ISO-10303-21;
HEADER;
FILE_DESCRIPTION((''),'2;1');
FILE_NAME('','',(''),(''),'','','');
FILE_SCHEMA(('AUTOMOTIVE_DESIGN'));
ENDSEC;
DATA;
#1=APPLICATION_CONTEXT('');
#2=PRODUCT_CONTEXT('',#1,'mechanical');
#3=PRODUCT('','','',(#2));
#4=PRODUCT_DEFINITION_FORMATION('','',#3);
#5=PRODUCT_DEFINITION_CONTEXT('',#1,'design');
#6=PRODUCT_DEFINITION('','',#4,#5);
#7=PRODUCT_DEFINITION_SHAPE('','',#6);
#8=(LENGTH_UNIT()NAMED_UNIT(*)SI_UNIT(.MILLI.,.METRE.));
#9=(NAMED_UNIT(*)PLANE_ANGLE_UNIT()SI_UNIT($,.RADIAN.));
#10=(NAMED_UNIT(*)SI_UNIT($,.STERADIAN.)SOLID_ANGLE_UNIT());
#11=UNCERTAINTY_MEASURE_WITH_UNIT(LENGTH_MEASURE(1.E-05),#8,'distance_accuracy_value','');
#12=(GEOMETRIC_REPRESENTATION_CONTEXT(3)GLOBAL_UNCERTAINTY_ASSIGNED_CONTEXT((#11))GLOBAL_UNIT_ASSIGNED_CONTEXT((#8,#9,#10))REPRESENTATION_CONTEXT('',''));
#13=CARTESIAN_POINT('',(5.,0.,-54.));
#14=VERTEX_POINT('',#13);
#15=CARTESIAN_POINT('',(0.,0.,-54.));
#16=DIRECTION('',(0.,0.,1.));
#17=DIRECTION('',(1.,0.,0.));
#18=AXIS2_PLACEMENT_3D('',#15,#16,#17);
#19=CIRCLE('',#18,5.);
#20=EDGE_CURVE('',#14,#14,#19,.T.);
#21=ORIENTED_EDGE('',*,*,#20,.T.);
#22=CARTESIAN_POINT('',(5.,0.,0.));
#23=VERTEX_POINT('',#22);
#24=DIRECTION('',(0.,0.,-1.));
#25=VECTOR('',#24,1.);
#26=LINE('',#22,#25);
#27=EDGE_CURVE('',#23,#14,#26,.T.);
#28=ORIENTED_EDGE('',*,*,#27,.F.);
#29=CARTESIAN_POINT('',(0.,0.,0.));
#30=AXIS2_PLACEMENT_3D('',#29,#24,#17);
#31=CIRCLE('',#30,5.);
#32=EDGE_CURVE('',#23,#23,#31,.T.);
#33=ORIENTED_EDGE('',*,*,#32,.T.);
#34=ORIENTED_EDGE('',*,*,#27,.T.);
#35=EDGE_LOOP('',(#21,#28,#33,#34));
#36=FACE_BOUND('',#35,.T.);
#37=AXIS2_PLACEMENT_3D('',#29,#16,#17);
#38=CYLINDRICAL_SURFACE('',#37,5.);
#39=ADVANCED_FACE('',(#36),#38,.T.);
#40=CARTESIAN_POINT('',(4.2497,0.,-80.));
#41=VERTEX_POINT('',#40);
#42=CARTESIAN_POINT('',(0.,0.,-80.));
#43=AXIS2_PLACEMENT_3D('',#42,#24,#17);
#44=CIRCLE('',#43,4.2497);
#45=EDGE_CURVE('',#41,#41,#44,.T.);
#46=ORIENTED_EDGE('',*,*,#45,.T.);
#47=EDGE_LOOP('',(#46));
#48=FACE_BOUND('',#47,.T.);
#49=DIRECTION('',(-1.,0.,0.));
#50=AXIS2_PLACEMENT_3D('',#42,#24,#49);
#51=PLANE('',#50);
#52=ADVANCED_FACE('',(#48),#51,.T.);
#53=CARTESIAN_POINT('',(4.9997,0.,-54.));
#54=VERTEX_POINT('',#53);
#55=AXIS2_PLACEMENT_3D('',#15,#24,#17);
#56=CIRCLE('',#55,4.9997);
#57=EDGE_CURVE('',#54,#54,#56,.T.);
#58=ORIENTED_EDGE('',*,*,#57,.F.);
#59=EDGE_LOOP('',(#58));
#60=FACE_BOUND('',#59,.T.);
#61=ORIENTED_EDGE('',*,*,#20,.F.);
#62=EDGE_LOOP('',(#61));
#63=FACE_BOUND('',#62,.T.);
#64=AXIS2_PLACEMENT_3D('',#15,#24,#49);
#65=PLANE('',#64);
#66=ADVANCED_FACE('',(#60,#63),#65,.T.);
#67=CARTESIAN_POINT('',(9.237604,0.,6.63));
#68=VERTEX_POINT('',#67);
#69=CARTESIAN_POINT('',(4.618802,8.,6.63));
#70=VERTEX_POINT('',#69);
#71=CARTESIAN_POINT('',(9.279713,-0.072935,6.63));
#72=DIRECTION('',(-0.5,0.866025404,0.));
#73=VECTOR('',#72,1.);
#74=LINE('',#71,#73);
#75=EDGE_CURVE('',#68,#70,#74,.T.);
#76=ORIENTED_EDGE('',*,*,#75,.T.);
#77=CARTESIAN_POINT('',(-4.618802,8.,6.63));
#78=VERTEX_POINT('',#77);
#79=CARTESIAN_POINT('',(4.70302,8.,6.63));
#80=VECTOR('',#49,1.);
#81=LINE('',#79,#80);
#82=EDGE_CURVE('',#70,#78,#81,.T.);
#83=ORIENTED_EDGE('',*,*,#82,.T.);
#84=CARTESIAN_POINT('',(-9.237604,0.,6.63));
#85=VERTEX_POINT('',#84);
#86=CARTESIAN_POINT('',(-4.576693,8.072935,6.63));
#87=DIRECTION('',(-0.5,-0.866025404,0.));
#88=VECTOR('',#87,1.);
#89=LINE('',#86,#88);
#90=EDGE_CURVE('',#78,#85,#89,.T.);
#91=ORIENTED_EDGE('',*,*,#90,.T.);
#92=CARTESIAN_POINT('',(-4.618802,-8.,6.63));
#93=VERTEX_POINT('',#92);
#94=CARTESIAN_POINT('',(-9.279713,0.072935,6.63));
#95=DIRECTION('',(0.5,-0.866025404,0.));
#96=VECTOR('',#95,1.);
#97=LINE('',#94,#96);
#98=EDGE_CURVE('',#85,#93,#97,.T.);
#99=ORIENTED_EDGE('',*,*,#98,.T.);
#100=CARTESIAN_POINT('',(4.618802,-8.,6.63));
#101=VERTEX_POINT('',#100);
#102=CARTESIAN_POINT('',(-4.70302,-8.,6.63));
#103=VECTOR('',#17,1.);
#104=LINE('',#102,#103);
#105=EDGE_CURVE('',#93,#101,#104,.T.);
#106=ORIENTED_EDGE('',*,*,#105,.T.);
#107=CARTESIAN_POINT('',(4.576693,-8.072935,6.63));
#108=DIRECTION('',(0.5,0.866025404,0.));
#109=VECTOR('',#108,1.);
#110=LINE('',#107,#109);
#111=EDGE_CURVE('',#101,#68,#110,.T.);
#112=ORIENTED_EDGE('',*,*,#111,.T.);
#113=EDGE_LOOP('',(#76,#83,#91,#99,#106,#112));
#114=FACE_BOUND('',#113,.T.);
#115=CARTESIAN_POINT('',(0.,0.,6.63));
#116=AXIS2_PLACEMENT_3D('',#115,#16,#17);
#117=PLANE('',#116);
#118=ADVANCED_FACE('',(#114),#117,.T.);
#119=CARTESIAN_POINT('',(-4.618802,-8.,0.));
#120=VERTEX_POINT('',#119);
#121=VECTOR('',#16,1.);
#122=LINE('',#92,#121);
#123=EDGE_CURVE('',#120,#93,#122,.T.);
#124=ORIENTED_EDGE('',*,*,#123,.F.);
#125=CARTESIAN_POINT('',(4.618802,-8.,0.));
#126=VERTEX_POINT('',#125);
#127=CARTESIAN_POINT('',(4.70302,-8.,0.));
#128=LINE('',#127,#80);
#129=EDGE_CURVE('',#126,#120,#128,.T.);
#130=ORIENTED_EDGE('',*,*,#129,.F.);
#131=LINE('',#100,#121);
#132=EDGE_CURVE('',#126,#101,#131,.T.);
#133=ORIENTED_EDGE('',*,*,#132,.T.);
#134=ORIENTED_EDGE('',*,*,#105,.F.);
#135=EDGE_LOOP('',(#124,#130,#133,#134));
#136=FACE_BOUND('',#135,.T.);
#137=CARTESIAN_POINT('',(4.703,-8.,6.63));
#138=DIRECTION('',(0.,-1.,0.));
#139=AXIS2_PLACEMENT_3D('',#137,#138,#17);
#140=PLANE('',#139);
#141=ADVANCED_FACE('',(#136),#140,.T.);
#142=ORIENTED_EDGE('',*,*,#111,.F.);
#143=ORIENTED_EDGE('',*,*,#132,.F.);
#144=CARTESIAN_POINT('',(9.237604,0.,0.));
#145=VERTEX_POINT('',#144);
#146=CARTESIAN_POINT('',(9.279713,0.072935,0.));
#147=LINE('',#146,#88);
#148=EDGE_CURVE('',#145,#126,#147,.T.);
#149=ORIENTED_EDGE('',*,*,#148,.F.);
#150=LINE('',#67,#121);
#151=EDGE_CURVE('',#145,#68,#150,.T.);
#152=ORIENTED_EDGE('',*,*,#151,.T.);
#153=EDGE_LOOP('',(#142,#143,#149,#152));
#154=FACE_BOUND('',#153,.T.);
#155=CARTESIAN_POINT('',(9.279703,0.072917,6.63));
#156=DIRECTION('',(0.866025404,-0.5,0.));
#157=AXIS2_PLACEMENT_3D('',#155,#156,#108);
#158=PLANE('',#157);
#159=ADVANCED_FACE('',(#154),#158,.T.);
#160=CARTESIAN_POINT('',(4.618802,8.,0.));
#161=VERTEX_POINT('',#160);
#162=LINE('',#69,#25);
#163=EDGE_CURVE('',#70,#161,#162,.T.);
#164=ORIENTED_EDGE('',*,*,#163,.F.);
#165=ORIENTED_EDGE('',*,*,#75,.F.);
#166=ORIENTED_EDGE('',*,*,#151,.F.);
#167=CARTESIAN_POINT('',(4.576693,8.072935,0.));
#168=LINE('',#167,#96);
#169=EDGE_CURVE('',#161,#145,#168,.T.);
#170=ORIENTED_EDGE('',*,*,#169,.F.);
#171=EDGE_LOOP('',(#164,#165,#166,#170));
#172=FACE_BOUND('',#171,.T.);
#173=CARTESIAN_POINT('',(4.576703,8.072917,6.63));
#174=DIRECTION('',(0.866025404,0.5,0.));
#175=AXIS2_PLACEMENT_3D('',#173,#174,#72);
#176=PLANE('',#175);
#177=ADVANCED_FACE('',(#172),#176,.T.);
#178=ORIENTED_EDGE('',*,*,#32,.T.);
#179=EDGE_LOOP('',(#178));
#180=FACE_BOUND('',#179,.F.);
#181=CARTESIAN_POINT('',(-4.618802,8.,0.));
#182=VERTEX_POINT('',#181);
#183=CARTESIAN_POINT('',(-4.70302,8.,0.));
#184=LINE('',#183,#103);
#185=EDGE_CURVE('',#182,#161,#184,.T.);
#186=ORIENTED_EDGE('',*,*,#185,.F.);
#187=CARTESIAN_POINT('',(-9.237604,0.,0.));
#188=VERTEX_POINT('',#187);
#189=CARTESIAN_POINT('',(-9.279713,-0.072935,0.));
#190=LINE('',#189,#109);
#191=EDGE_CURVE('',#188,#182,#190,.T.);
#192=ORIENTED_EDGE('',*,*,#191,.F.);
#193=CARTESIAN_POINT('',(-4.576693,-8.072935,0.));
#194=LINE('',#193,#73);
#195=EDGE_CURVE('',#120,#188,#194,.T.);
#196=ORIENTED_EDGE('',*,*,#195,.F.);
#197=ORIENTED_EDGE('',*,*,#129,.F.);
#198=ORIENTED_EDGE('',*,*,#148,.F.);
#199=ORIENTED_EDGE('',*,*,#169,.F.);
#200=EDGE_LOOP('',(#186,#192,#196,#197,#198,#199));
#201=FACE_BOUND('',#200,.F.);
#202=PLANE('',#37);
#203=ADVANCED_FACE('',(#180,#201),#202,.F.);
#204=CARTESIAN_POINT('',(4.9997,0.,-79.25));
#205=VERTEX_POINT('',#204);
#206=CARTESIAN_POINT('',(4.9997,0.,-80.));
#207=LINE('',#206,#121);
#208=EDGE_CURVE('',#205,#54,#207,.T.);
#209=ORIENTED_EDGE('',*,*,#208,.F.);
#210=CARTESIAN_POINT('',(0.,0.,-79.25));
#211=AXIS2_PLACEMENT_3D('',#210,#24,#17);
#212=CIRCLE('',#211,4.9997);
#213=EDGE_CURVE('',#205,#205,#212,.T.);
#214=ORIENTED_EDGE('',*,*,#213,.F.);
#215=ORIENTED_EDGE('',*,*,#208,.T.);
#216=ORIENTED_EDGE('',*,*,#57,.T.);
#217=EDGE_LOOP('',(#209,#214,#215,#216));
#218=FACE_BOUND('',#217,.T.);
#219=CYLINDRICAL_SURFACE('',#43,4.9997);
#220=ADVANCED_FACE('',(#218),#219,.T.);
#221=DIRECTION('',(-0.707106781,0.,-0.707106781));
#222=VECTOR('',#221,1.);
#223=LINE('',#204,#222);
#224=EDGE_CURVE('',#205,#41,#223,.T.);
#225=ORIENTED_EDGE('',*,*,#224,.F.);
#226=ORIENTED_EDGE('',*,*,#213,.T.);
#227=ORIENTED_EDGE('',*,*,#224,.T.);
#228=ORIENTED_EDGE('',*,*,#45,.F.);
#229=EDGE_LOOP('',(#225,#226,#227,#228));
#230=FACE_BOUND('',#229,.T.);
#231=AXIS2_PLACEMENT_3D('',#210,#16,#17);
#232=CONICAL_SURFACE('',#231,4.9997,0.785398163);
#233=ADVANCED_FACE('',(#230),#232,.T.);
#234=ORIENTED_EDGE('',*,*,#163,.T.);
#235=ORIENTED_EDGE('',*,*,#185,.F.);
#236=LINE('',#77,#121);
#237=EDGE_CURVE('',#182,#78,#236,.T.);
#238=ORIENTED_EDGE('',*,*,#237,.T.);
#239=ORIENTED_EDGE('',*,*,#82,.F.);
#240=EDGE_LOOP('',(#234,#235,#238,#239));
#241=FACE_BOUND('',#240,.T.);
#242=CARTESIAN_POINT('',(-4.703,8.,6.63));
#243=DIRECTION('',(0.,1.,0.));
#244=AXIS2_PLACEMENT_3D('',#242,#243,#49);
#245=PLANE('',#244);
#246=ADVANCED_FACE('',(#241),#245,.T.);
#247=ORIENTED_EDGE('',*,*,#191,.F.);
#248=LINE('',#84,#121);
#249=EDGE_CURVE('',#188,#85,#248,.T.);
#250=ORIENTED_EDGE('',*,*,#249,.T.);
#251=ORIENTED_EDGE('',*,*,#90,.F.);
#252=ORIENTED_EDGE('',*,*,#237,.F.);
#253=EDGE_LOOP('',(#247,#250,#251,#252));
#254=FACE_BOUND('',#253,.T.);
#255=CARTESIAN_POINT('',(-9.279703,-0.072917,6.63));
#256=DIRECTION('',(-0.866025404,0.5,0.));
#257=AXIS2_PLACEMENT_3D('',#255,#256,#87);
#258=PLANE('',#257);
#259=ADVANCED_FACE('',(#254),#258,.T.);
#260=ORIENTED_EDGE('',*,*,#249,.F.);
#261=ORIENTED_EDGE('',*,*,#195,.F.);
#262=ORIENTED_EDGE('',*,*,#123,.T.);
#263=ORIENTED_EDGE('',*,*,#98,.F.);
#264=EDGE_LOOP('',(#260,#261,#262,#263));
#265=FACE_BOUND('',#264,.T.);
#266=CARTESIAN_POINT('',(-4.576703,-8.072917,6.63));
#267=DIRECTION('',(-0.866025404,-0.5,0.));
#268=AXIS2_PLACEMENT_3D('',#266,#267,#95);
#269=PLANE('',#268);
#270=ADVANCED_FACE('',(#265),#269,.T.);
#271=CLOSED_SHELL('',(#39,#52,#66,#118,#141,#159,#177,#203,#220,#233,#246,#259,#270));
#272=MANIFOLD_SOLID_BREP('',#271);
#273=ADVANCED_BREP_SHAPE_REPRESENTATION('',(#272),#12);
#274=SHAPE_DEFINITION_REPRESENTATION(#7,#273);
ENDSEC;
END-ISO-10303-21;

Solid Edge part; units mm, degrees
sketch "Sketch1" plane through (0, 0, 0) normal (0, 0, 1) x (1, 0, 0)
  circle A0 centre (0, 0) radius 9.28
  dimension "D1" = 18.56
extrude "Protrusion1" add sketch "Sketch1" along normal blind 6.63
sketch "Sketch2" plane through (0, 0, 0) normal (0, 0, -1) x (1, 0, 0)
  circle A0 centre (0, 0) radius 5
extrude "Protrusion2" add sketch "Sketch2" along normal blind 80
sketch "Sketch3" plane through (0, 0, -80) normal (0, 0, -1) x (1, 0, 0)
  circle A0 centre (0, 0) radius 4.9997
extrude "Cutout1" cut sketch "Sketch3" against normal blind 26 flip side to cut
chamfer "Chamfer_1" distance 0.75 angle 45 1 edges at (-4.9997, 0, -80)
sketch "Sketch4" plane through (0, 0, 6.63) normal (0, 0, 1) x (1, 0, 0)
  line L0 (-4.703, 8) -> (4.703, 8)
  dimension "D1" = 16
extrude "Cutout2" cut sketch "Sketch4" against normal up to next material side at (0, 8.05, 6.63)
pattern_circular "Pattern1" count 6 over 360 about axis through (0, 0, 6.63) along (0, 0, 1) of "Cutout2"
properties part number "24104771"
